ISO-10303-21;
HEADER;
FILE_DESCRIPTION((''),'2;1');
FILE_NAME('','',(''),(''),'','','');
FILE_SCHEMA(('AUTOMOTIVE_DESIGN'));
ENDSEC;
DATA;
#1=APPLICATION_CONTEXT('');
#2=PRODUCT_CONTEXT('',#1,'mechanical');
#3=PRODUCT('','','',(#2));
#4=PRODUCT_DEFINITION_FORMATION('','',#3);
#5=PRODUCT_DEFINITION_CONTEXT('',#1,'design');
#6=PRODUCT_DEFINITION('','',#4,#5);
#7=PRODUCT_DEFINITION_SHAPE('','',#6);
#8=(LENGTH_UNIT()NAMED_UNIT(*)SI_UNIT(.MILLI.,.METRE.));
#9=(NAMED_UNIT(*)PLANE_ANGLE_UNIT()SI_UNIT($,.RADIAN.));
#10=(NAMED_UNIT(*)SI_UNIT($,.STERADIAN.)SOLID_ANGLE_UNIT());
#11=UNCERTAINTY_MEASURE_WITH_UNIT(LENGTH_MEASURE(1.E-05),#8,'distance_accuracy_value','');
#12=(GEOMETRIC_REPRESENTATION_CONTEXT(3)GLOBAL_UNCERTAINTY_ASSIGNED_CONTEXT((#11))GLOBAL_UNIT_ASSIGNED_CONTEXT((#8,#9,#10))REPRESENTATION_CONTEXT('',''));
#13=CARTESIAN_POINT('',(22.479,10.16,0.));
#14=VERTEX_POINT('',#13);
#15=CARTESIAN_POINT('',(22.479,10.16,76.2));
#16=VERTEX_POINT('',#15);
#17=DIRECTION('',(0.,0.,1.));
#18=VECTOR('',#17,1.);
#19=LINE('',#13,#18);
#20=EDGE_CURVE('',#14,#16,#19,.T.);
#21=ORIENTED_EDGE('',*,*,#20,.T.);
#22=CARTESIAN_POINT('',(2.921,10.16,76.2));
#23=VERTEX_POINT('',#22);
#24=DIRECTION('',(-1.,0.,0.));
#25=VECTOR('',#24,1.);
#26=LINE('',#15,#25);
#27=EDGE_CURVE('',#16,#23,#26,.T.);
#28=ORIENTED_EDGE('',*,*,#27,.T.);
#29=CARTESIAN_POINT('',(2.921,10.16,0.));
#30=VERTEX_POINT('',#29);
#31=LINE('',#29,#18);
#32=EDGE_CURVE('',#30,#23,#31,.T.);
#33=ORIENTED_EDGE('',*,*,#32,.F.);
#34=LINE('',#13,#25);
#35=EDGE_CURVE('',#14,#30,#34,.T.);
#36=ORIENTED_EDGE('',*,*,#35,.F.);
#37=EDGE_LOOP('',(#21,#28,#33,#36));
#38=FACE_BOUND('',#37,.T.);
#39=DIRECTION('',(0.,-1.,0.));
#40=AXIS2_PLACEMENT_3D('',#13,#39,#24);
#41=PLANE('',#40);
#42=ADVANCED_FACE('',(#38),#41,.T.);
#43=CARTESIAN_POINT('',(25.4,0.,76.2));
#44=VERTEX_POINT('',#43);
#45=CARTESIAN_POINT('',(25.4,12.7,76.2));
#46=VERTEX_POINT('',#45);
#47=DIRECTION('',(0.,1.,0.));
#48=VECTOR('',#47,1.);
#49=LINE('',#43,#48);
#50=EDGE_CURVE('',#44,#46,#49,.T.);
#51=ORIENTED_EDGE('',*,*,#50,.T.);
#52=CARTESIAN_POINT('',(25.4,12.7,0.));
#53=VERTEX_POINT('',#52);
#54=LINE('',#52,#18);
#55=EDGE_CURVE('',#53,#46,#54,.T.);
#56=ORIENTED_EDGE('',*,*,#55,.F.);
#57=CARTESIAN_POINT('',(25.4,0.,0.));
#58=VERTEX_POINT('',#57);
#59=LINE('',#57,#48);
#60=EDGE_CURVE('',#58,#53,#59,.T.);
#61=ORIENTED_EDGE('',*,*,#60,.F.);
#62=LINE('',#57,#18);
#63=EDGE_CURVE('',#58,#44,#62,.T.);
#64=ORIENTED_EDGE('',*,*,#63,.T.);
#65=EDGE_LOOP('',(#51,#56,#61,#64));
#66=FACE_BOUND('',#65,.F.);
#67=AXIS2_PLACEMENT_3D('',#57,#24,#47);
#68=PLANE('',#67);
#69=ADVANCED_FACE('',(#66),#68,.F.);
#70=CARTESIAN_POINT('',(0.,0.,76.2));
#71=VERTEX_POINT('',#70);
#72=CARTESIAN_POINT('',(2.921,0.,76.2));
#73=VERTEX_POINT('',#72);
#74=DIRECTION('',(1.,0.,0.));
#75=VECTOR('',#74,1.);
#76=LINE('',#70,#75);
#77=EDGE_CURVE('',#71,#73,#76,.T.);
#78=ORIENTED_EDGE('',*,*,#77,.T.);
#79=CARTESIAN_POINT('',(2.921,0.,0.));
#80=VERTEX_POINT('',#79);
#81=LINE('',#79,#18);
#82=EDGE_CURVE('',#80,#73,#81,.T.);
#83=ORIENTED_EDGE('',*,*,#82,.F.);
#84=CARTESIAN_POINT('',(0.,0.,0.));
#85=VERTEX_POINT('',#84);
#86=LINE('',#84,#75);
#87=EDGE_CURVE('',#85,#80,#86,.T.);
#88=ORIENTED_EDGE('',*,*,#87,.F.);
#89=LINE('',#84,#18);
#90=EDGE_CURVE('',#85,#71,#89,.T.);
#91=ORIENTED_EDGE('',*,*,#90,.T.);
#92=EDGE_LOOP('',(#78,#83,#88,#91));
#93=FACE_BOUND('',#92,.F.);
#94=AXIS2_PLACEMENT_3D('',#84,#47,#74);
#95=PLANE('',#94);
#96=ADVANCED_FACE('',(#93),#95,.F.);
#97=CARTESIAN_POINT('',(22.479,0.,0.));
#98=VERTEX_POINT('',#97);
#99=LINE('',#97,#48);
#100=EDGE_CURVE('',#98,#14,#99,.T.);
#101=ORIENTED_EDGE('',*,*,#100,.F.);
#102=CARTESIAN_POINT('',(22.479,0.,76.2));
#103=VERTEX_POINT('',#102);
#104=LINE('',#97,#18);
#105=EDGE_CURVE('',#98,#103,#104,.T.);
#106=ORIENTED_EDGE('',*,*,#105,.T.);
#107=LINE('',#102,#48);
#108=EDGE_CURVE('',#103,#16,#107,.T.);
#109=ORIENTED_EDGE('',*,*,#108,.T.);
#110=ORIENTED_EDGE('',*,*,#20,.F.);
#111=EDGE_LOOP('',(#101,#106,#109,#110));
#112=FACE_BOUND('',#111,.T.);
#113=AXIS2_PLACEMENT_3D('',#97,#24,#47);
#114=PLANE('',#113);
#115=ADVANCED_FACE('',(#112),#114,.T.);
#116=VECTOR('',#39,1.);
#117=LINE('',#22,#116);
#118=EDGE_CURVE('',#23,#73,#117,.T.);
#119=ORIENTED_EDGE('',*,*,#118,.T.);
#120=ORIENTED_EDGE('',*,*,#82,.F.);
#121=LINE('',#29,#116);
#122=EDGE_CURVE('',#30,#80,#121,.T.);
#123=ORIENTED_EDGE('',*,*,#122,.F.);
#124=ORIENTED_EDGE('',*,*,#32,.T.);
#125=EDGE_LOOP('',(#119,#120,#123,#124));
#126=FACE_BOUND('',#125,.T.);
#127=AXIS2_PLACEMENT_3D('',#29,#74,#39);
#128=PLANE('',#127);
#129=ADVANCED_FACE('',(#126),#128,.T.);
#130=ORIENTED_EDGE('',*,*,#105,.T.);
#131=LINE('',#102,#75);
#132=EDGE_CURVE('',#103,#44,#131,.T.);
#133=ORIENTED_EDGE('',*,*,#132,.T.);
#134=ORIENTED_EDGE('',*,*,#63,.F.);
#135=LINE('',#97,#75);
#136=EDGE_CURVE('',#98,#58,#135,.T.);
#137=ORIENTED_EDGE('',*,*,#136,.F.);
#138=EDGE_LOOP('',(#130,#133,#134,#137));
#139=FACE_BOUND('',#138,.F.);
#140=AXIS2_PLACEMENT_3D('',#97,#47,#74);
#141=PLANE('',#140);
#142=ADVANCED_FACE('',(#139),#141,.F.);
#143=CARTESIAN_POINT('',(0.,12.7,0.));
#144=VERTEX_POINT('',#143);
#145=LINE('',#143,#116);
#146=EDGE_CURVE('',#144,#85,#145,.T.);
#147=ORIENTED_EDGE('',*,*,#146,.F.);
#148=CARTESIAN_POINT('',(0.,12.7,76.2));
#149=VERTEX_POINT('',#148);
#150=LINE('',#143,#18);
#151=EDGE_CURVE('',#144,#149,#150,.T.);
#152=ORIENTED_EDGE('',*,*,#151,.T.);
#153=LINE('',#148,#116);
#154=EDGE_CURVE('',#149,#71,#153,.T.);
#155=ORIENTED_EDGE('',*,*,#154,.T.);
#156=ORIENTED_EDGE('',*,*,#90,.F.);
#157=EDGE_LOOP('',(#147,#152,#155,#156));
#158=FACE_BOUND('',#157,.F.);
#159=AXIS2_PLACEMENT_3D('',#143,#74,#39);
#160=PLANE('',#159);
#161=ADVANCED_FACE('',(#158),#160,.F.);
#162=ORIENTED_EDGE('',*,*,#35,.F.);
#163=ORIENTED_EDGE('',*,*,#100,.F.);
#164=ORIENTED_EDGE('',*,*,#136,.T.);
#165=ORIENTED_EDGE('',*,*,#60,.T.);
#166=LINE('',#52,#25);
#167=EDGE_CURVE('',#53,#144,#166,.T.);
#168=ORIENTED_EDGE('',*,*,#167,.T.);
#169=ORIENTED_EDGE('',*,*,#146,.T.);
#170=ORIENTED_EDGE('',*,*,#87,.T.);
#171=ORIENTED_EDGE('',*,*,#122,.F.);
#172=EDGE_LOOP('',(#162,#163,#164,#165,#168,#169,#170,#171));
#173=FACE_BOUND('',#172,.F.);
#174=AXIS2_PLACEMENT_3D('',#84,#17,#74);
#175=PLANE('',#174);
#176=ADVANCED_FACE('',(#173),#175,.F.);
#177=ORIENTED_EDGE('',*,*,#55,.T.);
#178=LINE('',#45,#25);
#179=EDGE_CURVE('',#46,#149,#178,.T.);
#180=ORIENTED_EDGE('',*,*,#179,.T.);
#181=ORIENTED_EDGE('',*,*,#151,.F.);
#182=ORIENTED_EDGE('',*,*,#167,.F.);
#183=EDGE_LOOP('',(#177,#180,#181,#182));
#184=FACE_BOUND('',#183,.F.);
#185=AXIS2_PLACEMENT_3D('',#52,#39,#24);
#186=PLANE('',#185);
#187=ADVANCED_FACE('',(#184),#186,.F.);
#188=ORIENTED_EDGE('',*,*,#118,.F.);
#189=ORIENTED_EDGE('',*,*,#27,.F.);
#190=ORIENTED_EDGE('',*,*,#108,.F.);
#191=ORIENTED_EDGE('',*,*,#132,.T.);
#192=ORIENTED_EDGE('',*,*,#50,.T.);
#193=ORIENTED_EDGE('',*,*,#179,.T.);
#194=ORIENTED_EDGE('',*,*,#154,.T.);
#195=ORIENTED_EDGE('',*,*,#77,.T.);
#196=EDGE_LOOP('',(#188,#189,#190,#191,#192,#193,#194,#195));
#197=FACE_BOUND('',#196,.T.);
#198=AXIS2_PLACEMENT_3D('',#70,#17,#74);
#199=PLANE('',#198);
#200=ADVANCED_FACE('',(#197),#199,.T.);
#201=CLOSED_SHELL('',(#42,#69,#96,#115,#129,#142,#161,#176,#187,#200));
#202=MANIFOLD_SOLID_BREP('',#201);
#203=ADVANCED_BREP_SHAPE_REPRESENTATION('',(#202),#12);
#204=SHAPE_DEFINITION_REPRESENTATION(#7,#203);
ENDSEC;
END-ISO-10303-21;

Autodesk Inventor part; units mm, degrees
ref_plane "YZ Plane" through (0, 0, 0) normal (1, 0, 0) x (0, 1, 0)
ref_plane "XZ Plane" through (0, 0, 0) normal (0, 1, 0) x (-1, 0, 0)
ref_plane "XY Plane" through (0, 0, 0) normal (0, 0, 1) x (1, 0, 0)
sketch "Sketch1" plane through (0, 0, 0) normal (0, 0, 1) x (1, 0, 0)
  line L0 (0, 0) -> (2.921, 0)
  line L1 (25.4, 0) -> (25.4, 12.7)
  line L2 (25.4, 12.7) -> (0, 12.7)
  line L3 (0, 12.7) -> (0, 0)
  line L4 (22.479, 0) -> (22.479, 10.16)
  line L5 (22.479, 10.16) -> (2.921, 10.16)
  line L6 (2.921, 10.16) -> (2.921, 0)
  line L7 (22.479, 0) -> (25.4, 0)
  line L8 (2.921, 0) -> (2.921, 10.16)
  line L9 (22.479, 10.16) -> (22.479, 0)
extrude "Extrusion1" add sketch "Sketch1" along normal blind 76.2
properties part number "imaginary stopper"
